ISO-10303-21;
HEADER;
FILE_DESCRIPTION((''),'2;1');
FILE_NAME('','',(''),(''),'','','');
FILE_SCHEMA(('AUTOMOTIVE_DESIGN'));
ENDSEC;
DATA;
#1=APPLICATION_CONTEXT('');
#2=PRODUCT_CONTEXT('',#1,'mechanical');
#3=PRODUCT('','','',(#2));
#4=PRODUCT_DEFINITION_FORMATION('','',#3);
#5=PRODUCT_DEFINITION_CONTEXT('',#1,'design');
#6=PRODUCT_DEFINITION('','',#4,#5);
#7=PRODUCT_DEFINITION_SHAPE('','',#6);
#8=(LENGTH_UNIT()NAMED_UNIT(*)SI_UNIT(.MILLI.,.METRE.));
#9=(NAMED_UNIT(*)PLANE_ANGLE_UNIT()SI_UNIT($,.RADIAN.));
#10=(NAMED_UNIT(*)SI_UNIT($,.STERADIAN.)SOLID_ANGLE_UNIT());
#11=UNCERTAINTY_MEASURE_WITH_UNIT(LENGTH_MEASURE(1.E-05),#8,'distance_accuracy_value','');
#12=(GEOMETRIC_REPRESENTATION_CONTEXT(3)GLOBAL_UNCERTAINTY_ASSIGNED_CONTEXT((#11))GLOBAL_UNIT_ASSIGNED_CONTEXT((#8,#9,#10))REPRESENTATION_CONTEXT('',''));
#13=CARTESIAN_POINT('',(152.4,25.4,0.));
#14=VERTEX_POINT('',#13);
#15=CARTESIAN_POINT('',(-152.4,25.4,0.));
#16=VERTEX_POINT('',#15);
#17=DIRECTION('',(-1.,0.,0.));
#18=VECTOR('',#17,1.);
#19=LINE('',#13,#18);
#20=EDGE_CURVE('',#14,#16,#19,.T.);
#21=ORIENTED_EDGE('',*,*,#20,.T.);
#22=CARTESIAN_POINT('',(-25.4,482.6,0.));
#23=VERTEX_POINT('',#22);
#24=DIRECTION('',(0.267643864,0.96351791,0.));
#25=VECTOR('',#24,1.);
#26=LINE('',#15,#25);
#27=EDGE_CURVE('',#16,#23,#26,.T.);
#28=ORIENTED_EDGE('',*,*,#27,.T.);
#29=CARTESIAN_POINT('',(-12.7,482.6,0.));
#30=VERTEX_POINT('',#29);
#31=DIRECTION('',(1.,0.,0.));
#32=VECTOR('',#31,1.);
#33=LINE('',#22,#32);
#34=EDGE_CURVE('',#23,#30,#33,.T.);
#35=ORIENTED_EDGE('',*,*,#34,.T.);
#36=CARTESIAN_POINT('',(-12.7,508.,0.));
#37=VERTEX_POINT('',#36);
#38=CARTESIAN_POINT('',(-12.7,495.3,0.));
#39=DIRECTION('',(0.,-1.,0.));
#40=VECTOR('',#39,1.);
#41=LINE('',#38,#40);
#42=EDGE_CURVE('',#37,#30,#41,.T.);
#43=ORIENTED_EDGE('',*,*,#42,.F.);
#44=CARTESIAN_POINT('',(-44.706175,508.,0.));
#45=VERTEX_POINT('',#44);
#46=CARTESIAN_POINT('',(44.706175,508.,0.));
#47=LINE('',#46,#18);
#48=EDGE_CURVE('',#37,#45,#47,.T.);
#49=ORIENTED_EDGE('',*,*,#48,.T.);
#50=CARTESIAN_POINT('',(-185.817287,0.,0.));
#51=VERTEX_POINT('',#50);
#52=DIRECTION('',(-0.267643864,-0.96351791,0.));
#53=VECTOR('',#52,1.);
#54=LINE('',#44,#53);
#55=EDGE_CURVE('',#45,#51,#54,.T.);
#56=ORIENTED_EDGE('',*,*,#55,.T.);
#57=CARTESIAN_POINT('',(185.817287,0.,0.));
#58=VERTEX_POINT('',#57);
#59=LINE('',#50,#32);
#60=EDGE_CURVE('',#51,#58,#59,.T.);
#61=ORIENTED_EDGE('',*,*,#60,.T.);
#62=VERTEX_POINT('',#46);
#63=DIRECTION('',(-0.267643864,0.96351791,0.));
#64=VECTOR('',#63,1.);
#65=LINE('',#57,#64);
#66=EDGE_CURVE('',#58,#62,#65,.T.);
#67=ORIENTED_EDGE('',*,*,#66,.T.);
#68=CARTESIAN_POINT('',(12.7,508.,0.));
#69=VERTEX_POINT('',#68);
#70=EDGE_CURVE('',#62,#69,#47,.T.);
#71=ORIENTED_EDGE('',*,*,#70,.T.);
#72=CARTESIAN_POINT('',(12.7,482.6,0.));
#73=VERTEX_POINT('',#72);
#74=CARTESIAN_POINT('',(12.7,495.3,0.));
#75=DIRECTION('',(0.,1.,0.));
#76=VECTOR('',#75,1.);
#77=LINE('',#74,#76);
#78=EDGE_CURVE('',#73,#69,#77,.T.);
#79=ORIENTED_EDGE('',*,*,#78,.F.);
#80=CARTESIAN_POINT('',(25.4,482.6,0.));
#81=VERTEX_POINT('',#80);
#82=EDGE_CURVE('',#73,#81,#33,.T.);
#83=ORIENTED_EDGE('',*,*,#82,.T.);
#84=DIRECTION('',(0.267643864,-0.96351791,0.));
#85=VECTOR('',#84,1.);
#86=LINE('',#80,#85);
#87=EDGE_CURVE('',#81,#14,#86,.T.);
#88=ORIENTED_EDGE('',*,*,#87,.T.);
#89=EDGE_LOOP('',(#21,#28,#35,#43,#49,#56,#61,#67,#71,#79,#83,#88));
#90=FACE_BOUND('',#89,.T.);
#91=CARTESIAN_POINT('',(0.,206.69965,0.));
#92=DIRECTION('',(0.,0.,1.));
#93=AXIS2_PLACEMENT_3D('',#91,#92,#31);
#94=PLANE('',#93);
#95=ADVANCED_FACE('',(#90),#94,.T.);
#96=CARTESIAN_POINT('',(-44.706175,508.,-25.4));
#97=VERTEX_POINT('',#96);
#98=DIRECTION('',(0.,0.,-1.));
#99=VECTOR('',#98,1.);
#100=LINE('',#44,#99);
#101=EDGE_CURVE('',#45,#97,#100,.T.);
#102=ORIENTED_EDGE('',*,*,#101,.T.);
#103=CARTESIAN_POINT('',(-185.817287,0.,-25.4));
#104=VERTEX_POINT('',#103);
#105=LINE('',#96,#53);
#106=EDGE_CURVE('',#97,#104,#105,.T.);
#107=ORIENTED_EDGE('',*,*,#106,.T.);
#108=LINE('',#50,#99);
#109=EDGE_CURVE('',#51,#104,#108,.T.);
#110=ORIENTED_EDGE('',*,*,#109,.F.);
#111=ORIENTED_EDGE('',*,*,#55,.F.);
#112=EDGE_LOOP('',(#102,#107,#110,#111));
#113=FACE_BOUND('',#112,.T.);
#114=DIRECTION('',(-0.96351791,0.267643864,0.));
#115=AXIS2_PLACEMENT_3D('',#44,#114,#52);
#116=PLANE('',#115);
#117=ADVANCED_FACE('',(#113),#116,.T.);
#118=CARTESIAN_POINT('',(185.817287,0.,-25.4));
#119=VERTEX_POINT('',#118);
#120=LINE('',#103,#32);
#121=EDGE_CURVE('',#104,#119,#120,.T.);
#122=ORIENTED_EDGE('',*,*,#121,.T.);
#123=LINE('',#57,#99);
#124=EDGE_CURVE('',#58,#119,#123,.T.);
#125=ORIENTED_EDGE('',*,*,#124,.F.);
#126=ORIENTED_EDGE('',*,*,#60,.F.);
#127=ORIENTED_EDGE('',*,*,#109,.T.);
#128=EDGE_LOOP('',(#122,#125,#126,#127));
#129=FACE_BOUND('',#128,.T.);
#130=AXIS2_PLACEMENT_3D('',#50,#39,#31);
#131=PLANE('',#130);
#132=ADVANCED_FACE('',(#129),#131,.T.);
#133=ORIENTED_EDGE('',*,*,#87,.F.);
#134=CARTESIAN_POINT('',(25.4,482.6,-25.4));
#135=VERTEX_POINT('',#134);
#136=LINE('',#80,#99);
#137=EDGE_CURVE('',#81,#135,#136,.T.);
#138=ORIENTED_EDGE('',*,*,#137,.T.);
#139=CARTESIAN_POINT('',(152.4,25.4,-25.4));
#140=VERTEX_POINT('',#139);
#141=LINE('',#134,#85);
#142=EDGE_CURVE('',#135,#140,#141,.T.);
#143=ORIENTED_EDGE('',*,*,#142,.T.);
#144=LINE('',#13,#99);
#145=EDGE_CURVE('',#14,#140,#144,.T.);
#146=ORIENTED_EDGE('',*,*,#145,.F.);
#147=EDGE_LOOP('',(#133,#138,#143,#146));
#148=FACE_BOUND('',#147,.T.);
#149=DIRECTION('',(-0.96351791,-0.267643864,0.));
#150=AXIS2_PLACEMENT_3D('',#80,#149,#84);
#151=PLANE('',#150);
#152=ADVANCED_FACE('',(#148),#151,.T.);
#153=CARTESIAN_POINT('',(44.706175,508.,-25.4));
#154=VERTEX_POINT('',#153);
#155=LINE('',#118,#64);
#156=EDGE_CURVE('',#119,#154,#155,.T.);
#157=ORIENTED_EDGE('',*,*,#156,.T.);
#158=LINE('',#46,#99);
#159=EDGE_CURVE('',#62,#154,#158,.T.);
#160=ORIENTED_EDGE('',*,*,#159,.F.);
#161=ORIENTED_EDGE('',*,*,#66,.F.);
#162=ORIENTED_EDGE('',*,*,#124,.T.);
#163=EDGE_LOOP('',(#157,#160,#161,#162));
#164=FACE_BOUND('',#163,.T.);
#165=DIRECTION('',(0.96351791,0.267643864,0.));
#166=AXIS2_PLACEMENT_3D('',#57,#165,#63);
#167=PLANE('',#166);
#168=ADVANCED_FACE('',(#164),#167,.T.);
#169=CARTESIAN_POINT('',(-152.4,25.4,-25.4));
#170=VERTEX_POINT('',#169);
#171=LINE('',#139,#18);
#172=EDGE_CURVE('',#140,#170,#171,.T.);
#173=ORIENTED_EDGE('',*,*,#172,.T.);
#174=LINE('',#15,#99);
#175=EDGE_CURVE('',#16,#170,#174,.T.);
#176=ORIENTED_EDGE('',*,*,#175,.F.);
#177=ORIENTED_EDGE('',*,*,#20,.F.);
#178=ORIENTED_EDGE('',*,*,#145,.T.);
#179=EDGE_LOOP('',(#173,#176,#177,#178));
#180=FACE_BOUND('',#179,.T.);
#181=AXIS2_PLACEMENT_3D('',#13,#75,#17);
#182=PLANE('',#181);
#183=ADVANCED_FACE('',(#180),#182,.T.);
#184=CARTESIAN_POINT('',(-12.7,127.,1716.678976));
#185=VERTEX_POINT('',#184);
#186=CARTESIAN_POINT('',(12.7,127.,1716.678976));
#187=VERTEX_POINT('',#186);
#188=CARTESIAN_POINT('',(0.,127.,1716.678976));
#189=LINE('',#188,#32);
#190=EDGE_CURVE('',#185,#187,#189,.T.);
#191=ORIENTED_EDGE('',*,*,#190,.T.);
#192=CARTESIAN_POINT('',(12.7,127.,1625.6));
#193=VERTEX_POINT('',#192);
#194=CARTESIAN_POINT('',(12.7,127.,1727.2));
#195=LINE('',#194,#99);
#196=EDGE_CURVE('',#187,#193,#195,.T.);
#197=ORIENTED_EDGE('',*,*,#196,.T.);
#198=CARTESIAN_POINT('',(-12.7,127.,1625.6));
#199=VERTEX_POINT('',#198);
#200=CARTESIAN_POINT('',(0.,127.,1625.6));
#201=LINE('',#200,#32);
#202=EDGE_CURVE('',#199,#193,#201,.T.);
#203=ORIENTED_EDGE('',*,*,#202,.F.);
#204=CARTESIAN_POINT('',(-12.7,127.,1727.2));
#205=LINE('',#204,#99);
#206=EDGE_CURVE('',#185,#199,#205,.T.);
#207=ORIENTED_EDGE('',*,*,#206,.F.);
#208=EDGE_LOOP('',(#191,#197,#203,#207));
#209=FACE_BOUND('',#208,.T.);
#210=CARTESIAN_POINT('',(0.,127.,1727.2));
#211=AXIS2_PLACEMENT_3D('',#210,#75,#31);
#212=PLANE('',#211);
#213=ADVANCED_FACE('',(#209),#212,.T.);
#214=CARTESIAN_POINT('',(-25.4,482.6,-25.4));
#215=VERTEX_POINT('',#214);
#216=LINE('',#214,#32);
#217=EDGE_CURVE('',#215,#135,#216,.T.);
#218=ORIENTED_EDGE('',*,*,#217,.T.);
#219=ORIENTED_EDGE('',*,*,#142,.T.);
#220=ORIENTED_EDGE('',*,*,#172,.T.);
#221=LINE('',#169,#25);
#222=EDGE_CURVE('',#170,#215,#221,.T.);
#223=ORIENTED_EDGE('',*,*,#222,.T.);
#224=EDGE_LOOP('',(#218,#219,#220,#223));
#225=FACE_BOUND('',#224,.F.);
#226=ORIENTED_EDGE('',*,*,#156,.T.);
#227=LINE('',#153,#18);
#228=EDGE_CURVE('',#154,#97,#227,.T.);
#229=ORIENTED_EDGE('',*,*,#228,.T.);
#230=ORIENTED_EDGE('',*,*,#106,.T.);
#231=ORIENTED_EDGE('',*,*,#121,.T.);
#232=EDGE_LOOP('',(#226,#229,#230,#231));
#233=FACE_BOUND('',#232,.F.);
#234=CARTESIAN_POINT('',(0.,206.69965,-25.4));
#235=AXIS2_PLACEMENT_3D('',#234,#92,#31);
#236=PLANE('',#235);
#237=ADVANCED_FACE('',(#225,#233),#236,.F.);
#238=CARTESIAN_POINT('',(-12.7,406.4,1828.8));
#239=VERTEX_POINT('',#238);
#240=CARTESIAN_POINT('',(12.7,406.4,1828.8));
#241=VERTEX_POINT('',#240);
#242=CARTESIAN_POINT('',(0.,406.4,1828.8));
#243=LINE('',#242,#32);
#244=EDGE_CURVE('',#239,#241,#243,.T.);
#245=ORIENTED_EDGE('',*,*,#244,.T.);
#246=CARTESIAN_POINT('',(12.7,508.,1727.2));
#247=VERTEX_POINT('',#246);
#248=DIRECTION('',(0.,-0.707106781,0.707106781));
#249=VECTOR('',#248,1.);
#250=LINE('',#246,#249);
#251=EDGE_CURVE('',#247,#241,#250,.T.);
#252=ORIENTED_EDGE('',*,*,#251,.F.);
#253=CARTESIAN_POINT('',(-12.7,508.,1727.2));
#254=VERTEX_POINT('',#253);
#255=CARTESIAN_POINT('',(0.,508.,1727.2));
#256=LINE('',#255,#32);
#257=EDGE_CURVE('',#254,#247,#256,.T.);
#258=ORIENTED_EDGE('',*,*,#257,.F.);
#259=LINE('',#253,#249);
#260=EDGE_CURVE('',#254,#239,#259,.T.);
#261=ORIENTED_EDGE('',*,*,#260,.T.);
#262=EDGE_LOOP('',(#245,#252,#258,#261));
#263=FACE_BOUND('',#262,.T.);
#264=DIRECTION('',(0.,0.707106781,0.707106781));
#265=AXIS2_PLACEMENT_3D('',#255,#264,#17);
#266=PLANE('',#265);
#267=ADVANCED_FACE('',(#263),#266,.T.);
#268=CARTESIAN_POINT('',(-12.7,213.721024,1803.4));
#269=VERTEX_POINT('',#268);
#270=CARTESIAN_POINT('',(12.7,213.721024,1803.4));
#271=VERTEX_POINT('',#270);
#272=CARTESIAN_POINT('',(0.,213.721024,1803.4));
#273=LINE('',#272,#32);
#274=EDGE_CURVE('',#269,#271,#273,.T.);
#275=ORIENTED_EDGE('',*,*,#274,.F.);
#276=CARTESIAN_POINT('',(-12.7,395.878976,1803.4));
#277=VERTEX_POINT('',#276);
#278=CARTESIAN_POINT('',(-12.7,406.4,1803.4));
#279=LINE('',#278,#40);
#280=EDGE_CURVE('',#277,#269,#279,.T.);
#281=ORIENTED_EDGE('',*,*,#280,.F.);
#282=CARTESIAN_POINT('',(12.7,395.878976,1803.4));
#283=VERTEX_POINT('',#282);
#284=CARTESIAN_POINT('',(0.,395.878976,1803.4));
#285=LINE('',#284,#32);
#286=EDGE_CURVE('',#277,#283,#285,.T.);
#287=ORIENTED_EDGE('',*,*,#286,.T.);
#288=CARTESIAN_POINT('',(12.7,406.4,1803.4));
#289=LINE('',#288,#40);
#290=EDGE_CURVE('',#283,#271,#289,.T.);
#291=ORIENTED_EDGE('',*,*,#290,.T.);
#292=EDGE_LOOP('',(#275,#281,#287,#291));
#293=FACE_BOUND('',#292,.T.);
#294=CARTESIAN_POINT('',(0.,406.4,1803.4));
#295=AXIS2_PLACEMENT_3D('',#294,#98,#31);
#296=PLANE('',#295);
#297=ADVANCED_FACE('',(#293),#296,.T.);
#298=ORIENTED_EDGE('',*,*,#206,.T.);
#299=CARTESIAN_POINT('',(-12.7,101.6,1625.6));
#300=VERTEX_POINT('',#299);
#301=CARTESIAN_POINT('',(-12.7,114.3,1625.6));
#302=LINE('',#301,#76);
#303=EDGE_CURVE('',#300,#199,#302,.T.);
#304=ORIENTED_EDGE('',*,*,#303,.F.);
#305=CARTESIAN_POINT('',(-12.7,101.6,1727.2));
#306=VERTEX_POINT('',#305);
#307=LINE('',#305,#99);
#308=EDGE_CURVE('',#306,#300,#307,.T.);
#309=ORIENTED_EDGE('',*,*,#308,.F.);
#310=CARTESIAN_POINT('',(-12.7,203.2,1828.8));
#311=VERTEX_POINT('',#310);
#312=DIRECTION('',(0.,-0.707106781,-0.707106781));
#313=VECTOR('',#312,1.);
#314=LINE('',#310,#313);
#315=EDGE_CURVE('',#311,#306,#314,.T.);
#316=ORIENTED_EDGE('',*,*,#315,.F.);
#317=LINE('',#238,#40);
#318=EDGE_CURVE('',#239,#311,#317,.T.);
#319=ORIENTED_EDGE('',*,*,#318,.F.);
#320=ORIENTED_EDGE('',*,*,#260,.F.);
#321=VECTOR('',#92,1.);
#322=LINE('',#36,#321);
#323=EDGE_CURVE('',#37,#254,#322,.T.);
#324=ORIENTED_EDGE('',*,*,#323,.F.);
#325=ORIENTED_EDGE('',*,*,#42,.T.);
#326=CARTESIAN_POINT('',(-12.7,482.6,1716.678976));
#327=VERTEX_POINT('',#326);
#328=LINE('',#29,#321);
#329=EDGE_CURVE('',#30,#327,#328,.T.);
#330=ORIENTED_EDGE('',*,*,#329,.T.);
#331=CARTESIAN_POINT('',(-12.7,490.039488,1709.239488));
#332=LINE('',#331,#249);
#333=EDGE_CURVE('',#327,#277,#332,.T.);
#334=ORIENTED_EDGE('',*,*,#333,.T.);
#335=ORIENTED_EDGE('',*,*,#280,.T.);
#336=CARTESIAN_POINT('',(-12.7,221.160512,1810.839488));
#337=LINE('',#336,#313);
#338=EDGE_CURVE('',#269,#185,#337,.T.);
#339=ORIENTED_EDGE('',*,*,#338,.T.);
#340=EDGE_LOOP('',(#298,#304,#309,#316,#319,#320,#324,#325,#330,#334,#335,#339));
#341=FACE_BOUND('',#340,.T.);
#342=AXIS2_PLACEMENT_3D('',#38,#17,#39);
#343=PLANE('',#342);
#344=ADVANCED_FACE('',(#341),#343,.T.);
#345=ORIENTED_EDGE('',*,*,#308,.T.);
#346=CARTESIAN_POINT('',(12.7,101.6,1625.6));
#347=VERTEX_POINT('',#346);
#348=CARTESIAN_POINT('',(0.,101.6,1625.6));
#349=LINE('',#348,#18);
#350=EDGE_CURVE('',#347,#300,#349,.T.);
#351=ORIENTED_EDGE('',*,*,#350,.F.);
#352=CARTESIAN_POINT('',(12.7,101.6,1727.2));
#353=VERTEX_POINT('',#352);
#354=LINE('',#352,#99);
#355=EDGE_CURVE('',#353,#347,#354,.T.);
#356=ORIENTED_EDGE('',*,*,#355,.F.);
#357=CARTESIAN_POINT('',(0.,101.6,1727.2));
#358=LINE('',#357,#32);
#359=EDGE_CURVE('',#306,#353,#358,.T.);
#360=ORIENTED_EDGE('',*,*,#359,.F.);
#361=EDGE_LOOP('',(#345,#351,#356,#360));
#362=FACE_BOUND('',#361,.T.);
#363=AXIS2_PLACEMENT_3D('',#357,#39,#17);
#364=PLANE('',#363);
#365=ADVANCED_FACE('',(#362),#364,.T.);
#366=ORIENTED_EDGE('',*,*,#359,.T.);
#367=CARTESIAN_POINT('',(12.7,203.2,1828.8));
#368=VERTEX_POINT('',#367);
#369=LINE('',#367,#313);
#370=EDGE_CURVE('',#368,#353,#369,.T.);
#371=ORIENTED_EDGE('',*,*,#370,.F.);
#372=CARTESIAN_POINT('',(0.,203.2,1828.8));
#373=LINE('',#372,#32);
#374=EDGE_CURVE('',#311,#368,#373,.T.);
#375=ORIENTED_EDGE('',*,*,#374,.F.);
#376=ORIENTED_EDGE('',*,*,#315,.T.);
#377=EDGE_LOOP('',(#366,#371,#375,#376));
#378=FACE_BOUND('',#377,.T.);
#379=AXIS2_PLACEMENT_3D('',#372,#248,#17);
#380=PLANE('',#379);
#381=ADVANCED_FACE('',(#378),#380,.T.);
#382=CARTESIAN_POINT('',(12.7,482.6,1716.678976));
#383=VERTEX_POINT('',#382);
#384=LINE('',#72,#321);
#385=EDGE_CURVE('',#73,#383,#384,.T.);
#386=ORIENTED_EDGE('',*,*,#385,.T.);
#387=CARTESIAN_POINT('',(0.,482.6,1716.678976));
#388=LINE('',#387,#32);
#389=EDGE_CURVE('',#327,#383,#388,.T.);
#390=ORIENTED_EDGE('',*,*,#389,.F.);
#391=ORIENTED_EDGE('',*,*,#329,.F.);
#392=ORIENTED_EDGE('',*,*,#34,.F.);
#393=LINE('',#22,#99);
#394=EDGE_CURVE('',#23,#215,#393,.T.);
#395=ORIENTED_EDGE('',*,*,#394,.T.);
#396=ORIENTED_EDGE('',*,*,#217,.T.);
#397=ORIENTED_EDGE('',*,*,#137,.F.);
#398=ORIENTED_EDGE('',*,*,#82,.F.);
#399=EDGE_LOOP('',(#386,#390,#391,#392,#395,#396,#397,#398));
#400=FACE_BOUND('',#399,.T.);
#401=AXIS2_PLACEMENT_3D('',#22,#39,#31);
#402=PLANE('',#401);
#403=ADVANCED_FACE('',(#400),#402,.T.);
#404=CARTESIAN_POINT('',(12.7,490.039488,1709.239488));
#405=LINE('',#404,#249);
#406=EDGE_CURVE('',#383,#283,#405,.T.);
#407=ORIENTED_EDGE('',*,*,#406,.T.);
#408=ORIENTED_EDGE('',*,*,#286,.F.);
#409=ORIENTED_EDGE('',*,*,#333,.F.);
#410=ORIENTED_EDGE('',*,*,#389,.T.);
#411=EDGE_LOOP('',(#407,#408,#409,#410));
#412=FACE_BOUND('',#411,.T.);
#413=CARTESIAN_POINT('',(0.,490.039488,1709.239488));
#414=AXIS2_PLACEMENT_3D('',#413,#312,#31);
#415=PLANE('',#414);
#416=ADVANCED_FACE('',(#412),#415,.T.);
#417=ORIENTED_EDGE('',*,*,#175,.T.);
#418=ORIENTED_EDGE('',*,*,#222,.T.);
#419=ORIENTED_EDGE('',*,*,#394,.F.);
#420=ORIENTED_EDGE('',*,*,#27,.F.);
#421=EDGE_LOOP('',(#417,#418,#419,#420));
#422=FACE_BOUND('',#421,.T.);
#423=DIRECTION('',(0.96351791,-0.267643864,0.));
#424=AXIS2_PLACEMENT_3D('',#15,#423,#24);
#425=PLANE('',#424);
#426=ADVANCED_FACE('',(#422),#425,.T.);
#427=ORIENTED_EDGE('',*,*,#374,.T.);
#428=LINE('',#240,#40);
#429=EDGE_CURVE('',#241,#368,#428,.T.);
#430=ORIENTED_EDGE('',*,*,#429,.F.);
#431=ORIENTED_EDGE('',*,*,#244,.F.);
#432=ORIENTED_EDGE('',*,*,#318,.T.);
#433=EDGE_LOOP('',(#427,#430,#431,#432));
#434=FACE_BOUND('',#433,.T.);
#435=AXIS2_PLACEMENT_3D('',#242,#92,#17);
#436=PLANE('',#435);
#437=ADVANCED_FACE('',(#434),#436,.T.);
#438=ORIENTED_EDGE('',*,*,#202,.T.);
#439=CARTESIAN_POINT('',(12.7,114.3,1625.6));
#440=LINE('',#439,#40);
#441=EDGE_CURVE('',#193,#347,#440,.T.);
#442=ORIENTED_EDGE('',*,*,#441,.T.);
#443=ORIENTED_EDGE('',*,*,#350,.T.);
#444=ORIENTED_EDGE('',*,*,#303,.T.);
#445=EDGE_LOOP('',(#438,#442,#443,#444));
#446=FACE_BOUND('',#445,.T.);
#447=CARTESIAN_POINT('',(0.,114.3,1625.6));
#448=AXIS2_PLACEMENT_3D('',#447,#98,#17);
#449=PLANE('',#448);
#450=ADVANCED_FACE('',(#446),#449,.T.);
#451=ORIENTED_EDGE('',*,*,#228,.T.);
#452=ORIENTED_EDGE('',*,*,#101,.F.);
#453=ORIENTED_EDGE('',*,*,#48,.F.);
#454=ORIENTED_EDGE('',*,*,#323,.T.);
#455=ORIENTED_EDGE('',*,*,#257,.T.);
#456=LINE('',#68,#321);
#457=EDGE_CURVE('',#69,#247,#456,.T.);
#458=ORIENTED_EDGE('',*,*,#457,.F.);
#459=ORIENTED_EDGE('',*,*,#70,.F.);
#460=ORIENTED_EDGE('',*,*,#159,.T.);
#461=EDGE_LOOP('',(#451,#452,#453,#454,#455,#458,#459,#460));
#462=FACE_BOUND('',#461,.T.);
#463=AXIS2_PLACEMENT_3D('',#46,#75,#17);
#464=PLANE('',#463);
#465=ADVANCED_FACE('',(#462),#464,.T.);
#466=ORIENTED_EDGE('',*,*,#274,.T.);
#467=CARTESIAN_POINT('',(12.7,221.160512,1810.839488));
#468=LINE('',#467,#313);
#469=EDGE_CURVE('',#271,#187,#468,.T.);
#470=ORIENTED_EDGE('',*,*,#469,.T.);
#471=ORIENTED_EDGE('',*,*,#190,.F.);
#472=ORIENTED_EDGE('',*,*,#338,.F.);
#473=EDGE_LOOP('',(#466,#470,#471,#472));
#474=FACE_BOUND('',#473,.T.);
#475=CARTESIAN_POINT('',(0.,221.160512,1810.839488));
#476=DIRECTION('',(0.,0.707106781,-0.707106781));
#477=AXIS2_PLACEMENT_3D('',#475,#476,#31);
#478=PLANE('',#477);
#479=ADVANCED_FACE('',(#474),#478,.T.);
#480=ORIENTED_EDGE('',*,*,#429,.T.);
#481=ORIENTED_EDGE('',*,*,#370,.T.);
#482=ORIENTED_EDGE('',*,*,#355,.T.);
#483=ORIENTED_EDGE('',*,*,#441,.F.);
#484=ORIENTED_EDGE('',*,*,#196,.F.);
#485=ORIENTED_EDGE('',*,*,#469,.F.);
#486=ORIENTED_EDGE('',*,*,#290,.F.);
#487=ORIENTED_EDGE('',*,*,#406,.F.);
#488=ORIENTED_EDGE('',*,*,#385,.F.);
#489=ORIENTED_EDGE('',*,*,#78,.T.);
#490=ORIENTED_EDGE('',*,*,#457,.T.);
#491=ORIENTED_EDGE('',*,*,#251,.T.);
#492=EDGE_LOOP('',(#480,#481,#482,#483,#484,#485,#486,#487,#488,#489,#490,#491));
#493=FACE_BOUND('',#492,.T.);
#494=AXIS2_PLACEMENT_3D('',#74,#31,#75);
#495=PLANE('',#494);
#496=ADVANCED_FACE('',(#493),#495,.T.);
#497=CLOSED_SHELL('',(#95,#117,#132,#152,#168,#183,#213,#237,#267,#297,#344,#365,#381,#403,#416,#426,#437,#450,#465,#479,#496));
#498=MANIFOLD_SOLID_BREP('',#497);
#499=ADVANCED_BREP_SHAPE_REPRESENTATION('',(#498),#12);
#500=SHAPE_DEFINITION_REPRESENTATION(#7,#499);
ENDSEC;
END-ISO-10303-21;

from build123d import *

# Parameters (mm, degrees)
F1_DEPTH = 25.4
F2_W     = 25.4
F2_H     = 25.4


with BuildPart() as f1:
    # F0 (on Top) → F1 (new body)
    with BuildSketch(Plane.XY):
        Polygon((44.7061754991, 508), (-44.7061754991, 508), (-185.8172866102, 0), (185.8172866102, 0), align=None)
        Polygon((-152.4, 25.4), (-25.4, 482.6), (25.4, 482.6), (152.4, 25.4), align=None, mode=Mode.SUBTRACT)
    extrude(amount=-F1_DEPTH)

    # F4: sweep along a path in F3
    with BuildLine(Plane.YZ) as f4_path:
        Line((508, 0), (508, 1727.2))
        Line((508, 1727.2), (406.4, 1828.8))
        Line((406.4, 1828.8), (203.2, 1828.8))
        Line((203.2, 1828.8), (101.6, 1727.2))
        Line((101.6, 1727.2), (101.6, 1625.6))
    # F2 (on Top) → F4 (sweep)
    with BuildSketch(Plane.XY):
        with Locations((0, 495.3)):
            Rectangle(F2_W, F2_H)
    sweep(path=f4_path.line, transition=Transition.RIGHT)


solid = f1.part
